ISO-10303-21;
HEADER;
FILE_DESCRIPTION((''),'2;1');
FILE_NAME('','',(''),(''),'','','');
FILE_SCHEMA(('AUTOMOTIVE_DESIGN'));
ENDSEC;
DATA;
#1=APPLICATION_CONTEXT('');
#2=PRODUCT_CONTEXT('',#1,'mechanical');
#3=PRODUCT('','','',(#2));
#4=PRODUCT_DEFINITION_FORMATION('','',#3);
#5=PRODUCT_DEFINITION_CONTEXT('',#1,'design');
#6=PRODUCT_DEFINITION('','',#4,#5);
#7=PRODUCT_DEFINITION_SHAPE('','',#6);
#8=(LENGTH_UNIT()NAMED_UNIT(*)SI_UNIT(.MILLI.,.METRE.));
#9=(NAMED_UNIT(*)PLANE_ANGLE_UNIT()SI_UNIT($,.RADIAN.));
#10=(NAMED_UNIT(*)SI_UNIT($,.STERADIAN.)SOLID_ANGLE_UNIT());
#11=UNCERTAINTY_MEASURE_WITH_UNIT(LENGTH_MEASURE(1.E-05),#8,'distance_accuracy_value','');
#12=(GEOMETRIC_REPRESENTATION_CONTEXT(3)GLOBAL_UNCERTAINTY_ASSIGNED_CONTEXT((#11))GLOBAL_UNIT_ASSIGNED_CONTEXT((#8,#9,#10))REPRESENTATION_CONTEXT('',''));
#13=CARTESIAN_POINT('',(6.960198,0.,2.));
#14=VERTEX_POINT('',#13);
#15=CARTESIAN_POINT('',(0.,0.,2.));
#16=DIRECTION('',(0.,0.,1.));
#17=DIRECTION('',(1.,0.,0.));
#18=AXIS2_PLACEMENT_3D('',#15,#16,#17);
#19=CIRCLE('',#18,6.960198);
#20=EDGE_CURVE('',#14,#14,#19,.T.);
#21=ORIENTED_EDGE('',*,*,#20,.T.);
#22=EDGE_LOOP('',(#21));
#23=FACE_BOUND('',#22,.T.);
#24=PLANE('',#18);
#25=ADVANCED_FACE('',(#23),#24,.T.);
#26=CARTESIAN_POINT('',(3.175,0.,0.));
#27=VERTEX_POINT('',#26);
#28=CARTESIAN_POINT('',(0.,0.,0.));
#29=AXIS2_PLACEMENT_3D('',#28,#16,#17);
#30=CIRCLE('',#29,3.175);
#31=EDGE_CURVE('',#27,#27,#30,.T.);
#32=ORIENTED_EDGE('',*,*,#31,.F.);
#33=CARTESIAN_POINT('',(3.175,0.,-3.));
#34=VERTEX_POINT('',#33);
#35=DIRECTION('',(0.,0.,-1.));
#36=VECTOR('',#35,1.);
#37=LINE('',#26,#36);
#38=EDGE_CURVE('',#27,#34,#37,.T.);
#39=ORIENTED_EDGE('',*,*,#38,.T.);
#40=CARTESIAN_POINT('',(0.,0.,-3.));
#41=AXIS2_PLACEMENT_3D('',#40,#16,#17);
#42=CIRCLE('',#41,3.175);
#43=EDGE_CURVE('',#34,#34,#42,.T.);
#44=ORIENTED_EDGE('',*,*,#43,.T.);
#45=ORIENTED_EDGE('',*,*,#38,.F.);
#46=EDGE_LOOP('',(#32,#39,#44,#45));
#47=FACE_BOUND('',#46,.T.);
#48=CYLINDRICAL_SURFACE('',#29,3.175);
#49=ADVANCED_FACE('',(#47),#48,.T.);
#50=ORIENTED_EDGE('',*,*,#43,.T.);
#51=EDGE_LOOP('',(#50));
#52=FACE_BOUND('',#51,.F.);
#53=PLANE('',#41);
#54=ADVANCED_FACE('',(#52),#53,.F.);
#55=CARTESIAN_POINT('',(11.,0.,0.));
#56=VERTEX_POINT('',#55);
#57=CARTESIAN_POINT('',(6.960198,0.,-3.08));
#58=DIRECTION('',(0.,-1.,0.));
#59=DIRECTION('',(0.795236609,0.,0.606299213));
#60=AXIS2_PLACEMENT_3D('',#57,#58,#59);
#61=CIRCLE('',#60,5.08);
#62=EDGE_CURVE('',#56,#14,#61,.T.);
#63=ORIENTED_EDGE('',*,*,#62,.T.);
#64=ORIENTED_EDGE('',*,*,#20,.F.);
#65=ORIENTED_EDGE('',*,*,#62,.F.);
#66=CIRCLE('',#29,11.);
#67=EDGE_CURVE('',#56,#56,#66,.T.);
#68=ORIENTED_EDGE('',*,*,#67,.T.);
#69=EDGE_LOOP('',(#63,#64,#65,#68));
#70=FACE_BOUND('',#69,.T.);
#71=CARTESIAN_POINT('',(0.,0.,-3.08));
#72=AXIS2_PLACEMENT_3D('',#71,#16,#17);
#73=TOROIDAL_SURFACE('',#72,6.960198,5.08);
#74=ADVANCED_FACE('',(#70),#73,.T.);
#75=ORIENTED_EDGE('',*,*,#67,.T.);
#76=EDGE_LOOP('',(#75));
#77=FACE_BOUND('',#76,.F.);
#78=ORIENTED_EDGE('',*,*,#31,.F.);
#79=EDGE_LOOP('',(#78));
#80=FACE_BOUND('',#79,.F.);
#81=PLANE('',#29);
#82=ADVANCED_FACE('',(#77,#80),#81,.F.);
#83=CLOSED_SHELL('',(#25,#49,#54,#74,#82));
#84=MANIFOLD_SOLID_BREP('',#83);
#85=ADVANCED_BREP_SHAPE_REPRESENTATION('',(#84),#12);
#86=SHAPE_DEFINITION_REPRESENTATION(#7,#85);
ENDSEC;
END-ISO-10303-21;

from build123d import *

# Parameters (mm, degrees)
F0_R     = 11
F2_DEPTH = 2
F1_R     = 3.175
F3_DEPTH = 3


# Not quite as in the source:
# - a fillet or chamfer that OpenCascade refuses, or shapes differently, is made with other operations: its cross-section is extruded or revolved along the edge and cut away or added


with BuildPart() as f2:
    # F0 (on Top) → F2 (new body)
    with BuildSketch(Plane.XY):
        Circle(F0_R)
    extrude(amount=F2_DEPTH)

    # F1 (on Top) → F3 (join)
    with BuildSketch(Plane.XY):
        Circle(F1_R)
    extrude(amount=-F3_DEPTH)

    # F4: fillet of radius 5.08 on 1 edges, made by hand

    # F4_s1 → F4_t2 (revolve, cut)
    with BuildSketch(Plane.XZ):
        with BuildLine():
            ThreePointArc((11, 0), (9.2140835586, 1.4726256161), (6.9601980247, 2))
            Line((6.9601980247, 2), (11, 2))
            Line((11, 2), (11, 0))
        make_face()
    revolve(axis=Axis((0, 0, 2), (0, 0, 1)), mode=Mode.SUBTRACT)


solid = f2.part
